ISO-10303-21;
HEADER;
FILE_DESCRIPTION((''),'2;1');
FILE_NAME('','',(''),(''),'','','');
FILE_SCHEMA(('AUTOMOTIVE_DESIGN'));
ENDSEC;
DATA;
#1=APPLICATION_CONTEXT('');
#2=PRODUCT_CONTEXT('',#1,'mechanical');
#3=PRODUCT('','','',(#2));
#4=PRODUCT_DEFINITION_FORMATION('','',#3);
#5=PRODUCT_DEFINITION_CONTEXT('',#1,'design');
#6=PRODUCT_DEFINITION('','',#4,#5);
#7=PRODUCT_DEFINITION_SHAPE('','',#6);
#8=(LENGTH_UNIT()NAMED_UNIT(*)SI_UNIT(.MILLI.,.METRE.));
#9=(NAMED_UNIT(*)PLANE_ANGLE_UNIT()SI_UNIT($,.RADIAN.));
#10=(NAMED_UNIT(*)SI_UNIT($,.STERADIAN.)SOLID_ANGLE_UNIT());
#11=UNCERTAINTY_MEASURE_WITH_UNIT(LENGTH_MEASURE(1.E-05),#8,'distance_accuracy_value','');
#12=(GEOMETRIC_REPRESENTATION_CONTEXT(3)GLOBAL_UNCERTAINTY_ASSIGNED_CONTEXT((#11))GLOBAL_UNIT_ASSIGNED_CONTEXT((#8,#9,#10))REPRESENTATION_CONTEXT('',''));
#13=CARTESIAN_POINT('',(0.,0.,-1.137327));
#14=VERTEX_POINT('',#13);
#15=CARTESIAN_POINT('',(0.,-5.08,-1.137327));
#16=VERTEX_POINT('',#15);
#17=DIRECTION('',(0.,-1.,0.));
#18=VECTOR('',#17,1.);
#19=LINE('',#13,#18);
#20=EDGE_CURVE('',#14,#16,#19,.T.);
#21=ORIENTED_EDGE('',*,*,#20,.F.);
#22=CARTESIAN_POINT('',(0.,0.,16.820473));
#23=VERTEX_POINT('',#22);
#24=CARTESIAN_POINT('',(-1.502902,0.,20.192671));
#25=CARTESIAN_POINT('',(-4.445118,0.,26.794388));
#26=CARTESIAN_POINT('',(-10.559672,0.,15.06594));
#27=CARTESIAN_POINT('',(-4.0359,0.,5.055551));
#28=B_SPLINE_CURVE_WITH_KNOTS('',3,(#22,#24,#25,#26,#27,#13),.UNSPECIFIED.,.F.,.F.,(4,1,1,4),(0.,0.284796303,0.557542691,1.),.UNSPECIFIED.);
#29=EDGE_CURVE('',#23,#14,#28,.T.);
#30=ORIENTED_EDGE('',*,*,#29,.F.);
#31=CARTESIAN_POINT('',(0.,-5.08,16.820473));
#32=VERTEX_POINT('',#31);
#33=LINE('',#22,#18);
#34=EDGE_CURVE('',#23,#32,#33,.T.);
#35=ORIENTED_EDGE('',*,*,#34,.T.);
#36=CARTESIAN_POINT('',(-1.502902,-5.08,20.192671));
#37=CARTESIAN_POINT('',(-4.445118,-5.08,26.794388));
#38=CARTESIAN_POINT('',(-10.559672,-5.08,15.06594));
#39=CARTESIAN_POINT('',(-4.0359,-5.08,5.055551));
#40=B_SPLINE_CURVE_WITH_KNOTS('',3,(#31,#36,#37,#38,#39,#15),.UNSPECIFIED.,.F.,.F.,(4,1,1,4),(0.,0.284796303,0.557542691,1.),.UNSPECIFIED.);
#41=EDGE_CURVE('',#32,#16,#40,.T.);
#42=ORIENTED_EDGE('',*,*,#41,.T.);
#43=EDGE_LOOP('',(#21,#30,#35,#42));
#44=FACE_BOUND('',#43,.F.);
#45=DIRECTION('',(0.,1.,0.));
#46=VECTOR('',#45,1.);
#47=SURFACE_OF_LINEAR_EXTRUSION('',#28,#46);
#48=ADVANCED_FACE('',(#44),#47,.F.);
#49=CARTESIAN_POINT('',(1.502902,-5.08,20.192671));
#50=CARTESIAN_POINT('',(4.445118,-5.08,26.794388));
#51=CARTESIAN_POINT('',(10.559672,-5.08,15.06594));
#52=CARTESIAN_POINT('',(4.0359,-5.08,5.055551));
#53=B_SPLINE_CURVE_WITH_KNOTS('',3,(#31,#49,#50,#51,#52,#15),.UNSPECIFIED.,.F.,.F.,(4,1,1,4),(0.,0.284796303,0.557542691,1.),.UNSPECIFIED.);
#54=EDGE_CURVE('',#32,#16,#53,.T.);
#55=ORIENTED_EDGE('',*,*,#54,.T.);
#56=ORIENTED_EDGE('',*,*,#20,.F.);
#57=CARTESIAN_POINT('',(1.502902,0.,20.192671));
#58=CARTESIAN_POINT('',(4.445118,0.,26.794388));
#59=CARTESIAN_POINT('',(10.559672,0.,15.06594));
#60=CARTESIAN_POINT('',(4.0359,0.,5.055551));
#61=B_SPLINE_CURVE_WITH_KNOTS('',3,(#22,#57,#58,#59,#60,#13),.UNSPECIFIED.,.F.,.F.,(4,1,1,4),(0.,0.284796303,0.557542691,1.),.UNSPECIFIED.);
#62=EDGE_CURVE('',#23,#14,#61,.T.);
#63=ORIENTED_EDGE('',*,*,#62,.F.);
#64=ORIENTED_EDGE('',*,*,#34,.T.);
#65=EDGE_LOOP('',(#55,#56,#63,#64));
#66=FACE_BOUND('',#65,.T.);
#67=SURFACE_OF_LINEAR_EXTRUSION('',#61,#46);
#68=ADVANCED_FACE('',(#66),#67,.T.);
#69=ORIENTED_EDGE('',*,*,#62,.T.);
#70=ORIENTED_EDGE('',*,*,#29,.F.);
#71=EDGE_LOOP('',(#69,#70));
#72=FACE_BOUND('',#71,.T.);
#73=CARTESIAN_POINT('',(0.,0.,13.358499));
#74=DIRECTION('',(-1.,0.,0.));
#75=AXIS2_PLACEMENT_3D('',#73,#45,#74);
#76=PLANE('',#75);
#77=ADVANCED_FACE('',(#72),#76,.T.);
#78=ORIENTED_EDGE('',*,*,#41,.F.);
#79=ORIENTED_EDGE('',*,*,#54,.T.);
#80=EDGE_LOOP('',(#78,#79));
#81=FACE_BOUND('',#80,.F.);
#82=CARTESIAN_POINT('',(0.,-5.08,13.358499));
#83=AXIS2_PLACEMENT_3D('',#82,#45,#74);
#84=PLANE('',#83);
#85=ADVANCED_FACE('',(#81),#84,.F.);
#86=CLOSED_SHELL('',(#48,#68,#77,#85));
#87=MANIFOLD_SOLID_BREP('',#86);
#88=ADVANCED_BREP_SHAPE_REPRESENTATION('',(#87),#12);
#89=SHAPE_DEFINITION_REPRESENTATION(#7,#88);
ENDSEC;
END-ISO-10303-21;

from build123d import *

# Parameters (mm, degrees)
F1_DEPTH = 5.08


with BuildPart() as f1:
    # F0 (on Front) → F1 (new body)
    with BuildSketch(Plane.XZ):
        with BuildLine():
            add(Edge.make_bspline(
                [(0, 16.8204726203), (1.5029023869, 20.1926711462), (4.4451183928, 26.7943883066), (10.5596723525, 15.0659398731), (4.0359001366, 5.055551181), (0, -1.1373273797)],
                knots=[0, 0, 0, 0, 0.2847963031, 0.5575426912, 1, 1, 1, 1], degree=3))
            add(Edge.make_bspline(
                [(0, 16.8204726203), (-1.5029023869, 20.1926711462), (-4.4451183928, 26.7943883066), (-10.5596723525, 15.0659398731), (-4.0359001366, 5.055551181), (0, -1.1373273797)],
                knots=[0, 0, 0, 0, 0.2847963031, 0.5575426912, 1, 1, 1, 1], degree=3))
        make_face()
    extrude(amount=F1_DEPTH)


solid = f1.part
